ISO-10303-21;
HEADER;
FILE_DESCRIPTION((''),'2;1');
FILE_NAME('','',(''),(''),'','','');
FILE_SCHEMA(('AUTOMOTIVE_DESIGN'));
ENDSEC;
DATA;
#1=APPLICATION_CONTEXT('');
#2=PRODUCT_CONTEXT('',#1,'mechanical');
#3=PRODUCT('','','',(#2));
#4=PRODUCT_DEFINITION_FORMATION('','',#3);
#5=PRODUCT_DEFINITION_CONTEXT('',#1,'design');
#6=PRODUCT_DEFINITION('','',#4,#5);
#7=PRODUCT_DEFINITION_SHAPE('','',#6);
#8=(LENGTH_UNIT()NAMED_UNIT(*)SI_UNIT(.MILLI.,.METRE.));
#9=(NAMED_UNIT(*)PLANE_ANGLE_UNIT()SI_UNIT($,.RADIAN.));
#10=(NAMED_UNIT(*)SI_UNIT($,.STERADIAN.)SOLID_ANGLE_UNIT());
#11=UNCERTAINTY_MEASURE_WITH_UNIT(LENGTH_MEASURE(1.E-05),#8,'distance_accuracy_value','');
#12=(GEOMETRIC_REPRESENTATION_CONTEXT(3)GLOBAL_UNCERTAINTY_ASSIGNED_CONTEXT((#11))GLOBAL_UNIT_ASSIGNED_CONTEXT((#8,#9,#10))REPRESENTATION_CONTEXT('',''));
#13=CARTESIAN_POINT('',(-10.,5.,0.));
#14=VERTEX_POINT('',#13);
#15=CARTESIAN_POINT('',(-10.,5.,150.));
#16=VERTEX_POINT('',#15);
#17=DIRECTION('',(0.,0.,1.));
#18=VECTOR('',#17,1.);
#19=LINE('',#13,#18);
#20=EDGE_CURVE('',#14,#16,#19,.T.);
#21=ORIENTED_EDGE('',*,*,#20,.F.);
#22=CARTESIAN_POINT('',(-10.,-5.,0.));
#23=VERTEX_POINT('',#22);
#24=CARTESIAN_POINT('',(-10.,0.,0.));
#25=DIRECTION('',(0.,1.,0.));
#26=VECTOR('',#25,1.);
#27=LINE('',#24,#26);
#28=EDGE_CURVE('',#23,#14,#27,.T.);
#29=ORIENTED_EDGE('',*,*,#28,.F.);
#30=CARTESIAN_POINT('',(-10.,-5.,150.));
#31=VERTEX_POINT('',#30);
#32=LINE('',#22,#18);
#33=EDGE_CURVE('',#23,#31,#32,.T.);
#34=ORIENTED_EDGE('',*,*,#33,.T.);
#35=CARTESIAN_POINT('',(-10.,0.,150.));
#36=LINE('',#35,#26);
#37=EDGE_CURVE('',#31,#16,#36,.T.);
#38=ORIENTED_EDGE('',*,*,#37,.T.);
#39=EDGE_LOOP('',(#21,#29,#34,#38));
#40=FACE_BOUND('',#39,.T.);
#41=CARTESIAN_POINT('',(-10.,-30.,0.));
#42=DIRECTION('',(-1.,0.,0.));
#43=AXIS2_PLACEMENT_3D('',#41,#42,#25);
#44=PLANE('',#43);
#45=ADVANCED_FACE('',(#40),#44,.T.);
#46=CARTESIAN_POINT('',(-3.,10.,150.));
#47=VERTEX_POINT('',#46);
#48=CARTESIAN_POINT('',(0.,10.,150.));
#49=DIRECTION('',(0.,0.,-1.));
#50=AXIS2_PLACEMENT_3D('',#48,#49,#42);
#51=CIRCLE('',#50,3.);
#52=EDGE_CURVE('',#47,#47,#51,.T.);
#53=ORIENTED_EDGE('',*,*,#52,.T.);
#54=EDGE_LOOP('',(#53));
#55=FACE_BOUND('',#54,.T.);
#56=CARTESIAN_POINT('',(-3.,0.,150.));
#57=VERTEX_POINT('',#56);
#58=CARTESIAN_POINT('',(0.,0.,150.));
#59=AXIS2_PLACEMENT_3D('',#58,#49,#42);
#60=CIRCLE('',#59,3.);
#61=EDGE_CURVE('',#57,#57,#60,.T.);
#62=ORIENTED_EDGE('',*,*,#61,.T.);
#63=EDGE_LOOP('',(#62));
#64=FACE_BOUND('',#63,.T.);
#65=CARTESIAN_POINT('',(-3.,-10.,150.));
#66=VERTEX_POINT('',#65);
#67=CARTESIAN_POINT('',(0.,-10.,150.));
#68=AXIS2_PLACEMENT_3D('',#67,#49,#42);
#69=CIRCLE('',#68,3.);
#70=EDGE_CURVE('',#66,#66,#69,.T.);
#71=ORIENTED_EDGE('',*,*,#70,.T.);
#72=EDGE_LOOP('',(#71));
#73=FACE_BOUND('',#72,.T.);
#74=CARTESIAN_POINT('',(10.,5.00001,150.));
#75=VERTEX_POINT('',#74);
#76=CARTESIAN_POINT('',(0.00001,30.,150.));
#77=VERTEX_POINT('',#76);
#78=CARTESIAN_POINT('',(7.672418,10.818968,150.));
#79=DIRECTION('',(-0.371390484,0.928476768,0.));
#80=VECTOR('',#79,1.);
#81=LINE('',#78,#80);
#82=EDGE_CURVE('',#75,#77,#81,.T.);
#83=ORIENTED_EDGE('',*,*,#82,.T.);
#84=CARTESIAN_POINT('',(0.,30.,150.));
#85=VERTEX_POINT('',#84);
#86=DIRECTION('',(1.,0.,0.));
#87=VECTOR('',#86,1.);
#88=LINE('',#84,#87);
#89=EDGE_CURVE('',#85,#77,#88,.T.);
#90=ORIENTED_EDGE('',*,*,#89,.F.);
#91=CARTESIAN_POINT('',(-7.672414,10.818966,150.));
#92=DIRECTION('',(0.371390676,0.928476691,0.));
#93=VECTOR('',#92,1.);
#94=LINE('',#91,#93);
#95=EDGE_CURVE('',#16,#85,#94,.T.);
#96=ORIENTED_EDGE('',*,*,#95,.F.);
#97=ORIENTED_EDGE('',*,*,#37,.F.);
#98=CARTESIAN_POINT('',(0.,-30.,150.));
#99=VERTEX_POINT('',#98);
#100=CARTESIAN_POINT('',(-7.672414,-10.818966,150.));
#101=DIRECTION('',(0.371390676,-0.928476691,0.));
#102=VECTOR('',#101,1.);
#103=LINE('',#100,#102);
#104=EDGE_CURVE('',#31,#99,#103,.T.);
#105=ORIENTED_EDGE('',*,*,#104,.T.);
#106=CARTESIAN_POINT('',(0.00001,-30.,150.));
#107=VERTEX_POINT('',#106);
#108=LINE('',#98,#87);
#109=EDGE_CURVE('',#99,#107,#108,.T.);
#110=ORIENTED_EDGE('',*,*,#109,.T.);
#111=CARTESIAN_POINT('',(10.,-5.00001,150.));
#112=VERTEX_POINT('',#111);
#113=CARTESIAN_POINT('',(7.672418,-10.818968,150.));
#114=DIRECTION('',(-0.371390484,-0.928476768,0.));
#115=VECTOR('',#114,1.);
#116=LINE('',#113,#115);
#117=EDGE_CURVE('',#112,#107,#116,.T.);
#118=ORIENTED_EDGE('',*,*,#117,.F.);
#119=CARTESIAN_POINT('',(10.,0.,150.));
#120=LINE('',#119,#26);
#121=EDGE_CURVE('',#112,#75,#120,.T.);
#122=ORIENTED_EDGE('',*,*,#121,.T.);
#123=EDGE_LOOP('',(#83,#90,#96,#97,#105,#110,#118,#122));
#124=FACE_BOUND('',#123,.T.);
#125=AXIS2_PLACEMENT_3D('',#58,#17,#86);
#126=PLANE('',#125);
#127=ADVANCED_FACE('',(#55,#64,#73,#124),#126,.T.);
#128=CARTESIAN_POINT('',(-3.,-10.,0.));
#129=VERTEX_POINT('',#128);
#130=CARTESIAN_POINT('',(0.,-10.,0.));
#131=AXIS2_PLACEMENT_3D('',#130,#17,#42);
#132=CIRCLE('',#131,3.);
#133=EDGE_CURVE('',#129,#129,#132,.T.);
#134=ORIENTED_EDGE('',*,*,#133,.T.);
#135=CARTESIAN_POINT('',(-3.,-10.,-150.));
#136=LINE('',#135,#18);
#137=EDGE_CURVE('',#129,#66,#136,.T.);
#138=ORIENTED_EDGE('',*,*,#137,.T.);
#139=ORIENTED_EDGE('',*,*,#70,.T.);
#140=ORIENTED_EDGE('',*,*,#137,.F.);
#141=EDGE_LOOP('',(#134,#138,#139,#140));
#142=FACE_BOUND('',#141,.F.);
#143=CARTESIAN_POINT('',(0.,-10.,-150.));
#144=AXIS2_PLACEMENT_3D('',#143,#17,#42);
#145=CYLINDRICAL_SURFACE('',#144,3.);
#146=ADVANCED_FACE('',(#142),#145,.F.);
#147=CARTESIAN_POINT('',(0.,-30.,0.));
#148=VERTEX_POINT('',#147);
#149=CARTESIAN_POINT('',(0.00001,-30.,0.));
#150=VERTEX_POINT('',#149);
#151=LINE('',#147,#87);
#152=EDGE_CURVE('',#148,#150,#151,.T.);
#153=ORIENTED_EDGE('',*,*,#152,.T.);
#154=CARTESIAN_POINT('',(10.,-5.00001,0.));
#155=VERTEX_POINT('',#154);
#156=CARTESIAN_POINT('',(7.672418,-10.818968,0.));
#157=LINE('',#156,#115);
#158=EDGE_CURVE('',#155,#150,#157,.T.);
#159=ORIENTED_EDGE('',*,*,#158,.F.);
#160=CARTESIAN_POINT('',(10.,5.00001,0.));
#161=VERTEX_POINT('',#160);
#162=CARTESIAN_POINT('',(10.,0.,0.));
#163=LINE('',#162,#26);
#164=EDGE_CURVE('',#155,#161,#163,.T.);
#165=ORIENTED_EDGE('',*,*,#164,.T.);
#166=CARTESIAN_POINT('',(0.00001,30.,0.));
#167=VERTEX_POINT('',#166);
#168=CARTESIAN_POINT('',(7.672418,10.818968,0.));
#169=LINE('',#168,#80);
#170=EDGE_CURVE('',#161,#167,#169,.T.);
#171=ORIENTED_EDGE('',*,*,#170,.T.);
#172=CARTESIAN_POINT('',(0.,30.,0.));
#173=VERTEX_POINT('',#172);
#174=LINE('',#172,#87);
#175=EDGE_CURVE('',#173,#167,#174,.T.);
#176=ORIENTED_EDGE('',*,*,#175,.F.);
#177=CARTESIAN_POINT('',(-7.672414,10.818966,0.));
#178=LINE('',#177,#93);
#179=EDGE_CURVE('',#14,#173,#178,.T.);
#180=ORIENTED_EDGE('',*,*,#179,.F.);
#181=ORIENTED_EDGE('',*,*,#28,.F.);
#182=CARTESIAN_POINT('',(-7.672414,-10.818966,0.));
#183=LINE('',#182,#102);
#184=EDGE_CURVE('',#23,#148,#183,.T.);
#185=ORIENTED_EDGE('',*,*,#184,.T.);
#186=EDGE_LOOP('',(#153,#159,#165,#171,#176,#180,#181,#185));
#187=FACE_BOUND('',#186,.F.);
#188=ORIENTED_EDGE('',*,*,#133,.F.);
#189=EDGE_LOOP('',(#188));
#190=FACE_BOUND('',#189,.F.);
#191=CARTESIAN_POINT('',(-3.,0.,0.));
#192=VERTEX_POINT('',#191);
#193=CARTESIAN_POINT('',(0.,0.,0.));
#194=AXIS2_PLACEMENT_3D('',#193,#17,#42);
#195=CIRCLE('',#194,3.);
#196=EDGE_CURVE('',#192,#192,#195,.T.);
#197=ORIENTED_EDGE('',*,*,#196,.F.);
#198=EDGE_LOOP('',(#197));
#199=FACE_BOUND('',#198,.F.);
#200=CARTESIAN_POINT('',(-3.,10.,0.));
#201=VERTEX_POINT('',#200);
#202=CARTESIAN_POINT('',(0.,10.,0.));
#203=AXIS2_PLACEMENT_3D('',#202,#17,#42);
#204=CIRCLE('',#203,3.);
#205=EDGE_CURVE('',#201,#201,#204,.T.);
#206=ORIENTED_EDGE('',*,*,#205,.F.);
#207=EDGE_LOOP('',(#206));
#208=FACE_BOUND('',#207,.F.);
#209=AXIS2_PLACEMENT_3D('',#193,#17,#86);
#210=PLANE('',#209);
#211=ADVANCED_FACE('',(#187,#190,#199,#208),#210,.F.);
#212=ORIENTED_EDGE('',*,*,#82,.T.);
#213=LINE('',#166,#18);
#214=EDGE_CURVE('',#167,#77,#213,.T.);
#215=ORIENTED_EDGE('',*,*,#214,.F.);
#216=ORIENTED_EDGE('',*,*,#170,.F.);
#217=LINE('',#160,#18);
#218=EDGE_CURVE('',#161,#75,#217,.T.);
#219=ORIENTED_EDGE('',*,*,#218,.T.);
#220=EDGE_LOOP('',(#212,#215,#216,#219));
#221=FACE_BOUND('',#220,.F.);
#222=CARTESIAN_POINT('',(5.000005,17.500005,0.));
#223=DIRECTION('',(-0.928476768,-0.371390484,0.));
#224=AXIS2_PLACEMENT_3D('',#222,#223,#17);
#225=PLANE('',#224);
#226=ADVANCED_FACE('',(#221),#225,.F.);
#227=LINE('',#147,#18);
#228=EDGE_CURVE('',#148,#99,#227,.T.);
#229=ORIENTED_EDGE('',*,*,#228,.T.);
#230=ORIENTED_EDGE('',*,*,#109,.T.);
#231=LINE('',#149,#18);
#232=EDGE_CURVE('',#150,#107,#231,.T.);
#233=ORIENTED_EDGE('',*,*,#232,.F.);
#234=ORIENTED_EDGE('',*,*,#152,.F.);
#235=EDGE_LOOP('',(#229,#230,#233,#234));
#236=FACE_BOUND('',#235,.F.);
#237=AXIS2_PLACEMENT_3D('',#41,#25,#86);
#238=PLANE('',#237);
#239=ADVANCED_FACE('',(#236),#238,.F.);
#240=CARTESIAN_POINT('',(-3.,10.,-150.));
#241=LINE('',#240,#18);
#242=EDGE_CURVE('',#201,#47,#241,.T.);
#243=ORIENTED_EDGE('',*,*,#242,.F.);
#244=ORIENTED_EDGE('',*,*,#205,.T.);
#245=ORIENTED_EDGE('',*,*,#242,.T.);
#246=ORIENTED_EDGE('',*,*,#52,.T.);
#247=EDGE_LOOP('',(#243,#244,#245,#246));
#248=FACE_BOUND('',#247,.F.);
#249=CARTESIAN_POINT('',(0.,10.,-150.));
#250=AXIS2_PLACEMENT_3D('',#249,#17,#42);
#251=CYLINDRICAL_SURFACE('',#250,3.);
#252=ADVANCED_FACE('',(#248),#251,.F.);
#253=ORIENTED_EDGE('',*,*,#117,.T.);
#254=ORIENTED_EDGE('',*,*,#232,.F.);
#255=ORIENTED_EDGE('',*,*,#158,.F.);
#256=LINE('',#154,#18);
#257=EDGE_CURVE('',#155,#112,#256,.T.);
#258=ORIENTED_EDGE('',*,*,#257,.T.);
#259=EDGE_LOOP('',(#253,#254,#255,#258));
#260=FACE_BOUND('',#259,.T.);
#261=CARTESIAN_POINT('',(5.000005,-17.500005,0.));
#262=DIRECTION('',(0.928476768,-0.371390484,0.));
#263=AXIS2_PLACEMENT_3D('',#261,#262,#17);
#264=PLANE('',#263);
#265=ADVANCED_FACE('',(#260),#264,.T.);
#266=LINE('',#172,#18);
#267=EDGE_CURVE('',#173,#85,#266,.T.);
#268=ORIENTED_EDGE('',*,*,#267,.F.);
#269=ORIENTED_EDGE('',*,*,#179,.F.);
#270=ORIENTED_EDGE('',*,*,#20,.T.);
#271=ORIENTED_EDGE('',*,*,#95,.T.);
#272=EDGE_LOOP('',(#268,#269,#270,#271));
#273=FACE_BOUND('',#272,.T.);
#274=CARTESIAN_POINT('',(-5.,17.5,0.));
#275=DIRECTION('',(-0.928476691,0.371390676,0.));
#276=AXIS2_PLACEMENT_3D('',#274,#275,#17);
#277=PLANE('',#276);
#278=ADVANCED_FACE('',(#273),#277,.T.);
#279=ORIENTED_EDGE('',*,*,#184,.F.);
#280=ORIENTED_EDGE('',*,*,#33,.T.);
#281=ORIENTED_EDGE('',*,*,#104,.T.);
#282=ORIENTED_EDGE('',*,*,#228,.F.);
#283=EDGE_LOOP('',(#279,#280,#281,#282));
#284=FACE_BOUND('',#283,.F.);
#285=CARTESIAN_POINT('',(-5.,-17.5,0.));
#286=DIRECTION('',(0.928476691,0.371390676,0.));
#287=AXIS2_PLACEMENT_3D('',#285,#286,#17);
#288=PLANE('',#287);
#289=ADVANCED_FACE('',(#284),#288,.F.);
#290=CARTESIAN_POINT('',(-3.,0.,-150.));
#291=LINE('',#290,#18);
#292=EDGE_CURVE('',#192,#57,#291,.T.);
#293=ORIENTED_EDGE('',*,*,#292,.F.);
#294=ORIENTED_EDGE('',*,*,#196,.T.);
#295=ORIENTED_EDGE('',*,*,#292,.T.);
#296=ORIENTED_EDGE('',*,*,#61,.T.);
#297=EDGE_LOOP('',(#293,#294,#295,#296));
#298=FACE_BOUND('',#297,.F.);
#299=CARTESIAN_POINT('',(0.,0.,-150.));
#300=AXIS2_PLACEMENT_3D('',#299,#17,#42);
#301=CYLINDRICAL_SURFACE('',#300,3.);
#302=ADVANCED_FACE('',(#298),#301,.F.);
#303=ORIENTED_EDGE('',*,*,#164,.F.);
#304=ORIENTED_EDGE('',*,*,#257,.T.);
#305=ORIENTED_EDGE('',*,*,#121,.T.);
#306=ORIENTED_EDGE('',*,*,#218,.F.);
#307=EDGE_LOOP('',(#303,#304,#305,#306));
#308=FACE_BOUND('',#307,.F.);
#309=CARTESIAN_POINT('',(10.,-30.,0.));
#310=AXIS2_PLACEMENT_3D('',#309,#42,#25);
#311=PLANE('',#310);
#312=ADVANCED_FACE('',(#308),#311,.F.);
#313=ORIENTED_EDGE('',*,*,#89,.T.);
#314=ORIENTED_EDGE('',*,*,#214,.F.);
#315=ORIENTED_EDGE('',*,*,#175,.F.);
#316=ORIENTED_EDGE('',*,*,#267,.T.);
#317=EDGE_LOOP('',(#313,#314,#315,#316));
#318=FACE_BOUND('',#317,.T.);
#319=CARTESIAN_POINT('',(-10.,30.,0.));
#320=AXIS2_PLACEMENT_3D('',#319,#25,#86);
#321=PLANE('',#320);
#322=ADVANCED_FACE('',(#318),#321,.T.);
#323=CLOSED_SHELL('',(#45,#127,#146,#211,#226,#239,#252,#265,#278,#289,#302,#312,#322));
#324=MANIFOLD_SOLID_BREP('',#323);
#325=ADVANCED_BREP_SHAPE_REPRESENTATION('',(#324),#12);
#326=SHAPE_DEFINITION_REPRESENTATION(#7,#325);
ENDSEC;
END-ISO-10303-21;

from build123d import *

# Parameters (mm, degrees)
F0_W       = 20
F0_H       = 60
F1_DEPTH   = 150
F2_D       = 6
F2_DEPTH   = 150
F2_TIP     = 1.8025818571
F3_SIZE2   = 10
F3_SIZE    = 25
F3_2_SIZE2 = 9.99999
F3_2_SIZE  = 24.99999


# Not quite as in the source:
# - a fillet or chamfer is up to 0.001 mm smaller than in the source, because OpenCascade refuses the exact size


with BuildPart() as f1:
    # F0 (on Top) → F1 (new body)
    with BuildSketch(Plane.XY):
        Rectangle(F0_W, F0_H)
    extrude(amount=F1_DEPTH)

    # F2
    with Locations(Plane(origin=(0, 0, 0), x_dir=(1, 0, 0), z_dir=(0, 0, -1))):
        with Locations((0, -10), (0, 0), (0, 10)):
            Hole(F2_D / 2, depth=F2_DEPTH)
            with Locations((0, 0, -(F2_DEPTH + F2_TIP / 2))):  # 118° drill point
                Cone(0, F2_D / 2, F2_TIP, mode=Mode.SUBTRACT)

    # F3
    f3_edges = [f1.edges().sort_by_distance(p)[0] for p in [
        (-10, 30, 75),
        (-10, -30, 75),
    ]]
    f3_side = f1.faces().sort_by_distance((-10, 0, 75))[0]
    chamfer(f3_edges, length=F3_SIZE, length2=F3_SIZE2, reference=f3_side)

    # F3#2 (size 25 and 10 in the source; OpenCascade refuses exactly that, so slightly less here)
    f3_2_edges = [f1.edges().sort_by_distance(p)[0] for p in [
        (10, -30, 75),
        (10, 30, 75),
    ]]
    f3_2_side = f1.faces().sort_by_distance((10, 0, 75))[0]
    chamfer(f3_2_edges, length=F3_2_SIZE, length2=F3_2_SIZE2, reference=f3_2_side)


solid = f1.part
